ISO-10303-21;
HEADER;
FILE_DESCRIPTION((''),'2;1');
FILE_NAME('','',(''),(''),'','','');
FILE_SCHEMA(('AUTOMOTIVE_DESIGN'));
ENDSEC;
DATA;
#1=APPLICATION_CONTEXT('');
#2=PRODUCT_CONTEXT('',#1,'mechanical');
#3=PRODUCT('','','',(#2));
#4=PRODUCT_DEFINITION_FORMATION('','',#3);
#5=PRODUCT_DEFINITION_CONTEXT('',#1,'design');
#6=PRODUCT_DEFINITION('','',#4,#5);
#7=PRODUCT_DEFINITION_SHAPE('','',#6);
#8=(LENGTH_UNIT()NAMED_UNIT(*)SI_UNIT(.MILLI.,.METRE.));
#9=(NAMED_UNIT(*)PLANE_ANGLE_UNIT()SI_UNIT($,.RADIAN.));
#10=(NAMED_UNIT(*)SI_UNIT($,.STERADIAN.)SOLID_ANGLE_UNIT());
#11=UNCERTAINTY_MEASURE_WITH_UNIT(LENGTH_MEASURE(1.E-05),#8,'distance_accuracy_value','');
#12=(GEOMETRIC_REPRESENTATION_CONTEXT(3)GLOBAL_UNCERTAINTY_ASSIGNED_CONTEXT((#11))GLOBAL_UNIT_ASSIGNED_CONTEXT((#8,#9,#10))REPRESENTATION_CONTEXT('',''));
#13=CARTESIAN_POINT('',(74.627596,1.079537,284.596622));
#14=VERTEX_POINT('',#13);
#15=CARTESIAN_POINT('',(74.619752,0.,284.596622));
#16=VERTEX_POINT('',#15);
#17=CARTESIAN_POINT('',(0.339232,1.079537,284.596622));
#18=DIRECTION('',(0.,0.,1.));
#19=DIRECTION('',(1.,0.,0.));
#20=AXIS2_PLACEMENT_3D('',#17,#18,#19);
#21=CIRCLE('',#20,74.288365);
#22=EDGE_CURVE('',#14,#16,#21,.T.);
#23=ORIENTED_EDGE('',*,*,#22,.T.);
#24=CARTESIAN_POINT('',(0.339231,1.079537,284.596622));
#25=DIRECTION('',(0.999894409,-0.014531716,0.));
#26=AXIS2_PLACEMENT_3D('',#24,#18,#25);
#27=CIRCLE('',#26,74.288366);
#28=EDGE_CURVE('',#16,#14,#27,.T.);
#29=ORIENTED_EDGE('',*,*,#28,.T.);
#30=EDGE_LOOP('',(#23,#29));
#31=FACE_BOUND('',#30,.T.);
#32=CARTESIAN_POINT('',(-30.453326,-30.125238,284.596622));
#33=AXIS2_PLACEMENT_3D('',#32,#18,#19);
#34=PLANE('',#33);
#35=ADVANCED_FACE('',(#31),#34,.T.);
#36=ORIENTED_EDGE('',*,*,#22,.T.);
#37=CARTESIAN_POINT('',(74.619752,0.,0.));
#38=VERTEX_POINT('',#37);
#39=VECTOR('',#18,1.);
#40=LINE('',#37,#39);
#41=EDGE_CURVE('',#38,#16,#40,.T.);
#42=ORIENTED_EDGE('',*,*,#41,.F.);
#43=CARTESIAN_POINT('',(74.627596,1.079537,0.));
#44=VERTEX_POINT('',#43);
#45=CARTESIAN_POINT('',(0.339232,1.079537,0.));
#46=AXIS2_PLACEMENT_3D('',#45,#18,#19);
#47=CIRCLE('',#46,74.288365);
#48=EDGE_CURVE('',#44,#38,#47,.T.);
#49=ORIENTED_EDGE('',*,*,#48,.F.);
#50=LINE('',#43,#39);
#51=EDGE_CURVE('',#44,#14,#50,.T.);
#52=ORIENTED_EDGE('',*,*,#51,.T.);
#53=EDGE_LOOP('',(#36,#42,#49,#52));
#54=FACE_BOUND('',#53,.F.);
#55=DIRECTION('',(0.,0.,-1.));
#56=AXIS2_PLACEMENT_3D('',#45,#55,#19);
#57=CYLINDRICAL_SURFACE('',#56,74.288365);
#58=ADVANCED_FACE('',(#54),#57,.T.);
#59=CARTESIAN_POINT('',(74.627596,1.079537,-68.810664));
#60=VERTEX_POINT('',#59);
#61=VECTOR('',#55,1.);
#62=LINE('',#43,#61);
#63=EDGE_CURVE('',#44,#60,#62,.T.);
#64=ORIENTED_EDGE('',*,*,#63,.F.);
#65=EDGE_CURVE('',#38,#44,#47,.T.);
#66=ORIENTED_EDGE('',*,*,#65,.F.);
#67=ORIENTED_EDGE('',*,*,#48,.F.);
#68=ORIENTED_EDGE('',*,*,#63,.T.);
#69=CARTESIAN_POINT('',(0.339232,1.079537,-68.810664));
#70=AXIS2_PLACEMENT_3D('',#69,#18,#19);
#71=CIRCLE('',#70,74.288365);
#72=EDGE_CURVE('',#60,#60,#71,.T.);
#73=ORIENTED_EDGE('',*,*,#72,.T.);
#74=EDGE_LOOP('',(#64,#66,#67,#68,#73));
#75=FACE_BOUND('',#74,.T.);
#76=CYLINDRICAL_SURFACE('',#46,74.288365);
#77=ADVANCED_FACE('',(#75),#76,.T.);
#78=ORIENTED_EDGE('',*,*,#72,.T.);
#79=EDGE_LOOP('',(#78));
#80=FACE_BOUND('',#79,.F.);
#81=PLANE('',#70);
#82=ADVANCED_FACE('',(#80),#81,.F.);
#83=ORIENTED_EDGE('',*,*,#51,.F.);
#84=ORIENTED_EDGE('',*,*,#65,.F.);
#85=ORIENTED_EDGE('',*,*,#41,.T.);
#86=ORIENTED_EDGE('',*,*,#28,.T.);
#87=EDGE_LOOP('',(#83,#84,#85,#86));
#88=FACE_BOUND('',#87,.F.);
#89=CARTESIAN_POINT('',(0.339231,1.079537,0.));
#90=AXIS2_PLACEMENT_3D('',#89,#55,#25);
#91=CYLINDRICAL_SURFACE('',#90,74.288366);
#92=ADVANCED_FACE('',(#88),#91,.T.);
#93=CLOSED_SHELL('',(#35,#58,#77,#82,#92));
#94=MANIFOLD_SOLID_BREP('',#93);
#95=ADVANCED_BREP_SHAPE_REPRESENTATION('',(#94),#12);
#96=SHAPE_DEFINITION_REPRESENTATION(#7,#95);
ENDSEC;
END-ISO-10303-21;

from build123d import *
from build123d import SkipClean  # not in build123d's __all__

# Parameters (mm, degrees)
F2_R     = 74.288364797
F4_DEPTH = 68.8106641173
F5_DEPTH = 284.5966219902


with BuildPart() as f4:
    # F2 (on Top) → F4 (new body)
    with BuildSketch(Plane.XY):
        with Locations((0.3392315994, 1.0795374401)):
            Circle(F2_R)
    extrude(amount=-F4_DEPTH)

    # F3 (on face) → F5 (join)
    with BuildSketch(Plane.XY):
        with BuildLine():
            Line((0, -73.2080528165), (0, 0))
            Line((0, 0), (-0.1704884926, 0))
            Line((-0.1704884926, 0), (-73.9412890176, 0))
            ThreePointArc((-73.9412890176, 0), (-51.9281732004, -51.7113665085), (0, -73.2080528165))
        make_face()
        with BuildLine():
            Line((-0.1704884926, 0), (0, 0))
            Line((0, 0), (74.6197522163, 0))
            ThreePointArc((74.6197522163, 0), (74.6256353254, 0.5397544708), (74.6275963963, 1.0795374401))
            ThreePointArc((74.6275963963, 1.0795374401), (-0.2005513699, 75.3659411662), (-73.9412890176, 0))
            Line((-73.9412890176, 0), (-0.1704884926, 0))
        make_face()
        with BuildLine():
            Line((74.6197522163, 0), (0, 0))
            Line((0, 0), (0, -73.2080528165))
            ThreePointArc((0, -73.2080528165), (52.3650262083, -51.9494908323), (74.6197522163, 0))
        make_face()
    with SkipClean():  # cleaning this boolean's faces spoils the solid; the shape is the same uncleaned
        extrude(amount=F5_DEPTH)


solid = f4.part
